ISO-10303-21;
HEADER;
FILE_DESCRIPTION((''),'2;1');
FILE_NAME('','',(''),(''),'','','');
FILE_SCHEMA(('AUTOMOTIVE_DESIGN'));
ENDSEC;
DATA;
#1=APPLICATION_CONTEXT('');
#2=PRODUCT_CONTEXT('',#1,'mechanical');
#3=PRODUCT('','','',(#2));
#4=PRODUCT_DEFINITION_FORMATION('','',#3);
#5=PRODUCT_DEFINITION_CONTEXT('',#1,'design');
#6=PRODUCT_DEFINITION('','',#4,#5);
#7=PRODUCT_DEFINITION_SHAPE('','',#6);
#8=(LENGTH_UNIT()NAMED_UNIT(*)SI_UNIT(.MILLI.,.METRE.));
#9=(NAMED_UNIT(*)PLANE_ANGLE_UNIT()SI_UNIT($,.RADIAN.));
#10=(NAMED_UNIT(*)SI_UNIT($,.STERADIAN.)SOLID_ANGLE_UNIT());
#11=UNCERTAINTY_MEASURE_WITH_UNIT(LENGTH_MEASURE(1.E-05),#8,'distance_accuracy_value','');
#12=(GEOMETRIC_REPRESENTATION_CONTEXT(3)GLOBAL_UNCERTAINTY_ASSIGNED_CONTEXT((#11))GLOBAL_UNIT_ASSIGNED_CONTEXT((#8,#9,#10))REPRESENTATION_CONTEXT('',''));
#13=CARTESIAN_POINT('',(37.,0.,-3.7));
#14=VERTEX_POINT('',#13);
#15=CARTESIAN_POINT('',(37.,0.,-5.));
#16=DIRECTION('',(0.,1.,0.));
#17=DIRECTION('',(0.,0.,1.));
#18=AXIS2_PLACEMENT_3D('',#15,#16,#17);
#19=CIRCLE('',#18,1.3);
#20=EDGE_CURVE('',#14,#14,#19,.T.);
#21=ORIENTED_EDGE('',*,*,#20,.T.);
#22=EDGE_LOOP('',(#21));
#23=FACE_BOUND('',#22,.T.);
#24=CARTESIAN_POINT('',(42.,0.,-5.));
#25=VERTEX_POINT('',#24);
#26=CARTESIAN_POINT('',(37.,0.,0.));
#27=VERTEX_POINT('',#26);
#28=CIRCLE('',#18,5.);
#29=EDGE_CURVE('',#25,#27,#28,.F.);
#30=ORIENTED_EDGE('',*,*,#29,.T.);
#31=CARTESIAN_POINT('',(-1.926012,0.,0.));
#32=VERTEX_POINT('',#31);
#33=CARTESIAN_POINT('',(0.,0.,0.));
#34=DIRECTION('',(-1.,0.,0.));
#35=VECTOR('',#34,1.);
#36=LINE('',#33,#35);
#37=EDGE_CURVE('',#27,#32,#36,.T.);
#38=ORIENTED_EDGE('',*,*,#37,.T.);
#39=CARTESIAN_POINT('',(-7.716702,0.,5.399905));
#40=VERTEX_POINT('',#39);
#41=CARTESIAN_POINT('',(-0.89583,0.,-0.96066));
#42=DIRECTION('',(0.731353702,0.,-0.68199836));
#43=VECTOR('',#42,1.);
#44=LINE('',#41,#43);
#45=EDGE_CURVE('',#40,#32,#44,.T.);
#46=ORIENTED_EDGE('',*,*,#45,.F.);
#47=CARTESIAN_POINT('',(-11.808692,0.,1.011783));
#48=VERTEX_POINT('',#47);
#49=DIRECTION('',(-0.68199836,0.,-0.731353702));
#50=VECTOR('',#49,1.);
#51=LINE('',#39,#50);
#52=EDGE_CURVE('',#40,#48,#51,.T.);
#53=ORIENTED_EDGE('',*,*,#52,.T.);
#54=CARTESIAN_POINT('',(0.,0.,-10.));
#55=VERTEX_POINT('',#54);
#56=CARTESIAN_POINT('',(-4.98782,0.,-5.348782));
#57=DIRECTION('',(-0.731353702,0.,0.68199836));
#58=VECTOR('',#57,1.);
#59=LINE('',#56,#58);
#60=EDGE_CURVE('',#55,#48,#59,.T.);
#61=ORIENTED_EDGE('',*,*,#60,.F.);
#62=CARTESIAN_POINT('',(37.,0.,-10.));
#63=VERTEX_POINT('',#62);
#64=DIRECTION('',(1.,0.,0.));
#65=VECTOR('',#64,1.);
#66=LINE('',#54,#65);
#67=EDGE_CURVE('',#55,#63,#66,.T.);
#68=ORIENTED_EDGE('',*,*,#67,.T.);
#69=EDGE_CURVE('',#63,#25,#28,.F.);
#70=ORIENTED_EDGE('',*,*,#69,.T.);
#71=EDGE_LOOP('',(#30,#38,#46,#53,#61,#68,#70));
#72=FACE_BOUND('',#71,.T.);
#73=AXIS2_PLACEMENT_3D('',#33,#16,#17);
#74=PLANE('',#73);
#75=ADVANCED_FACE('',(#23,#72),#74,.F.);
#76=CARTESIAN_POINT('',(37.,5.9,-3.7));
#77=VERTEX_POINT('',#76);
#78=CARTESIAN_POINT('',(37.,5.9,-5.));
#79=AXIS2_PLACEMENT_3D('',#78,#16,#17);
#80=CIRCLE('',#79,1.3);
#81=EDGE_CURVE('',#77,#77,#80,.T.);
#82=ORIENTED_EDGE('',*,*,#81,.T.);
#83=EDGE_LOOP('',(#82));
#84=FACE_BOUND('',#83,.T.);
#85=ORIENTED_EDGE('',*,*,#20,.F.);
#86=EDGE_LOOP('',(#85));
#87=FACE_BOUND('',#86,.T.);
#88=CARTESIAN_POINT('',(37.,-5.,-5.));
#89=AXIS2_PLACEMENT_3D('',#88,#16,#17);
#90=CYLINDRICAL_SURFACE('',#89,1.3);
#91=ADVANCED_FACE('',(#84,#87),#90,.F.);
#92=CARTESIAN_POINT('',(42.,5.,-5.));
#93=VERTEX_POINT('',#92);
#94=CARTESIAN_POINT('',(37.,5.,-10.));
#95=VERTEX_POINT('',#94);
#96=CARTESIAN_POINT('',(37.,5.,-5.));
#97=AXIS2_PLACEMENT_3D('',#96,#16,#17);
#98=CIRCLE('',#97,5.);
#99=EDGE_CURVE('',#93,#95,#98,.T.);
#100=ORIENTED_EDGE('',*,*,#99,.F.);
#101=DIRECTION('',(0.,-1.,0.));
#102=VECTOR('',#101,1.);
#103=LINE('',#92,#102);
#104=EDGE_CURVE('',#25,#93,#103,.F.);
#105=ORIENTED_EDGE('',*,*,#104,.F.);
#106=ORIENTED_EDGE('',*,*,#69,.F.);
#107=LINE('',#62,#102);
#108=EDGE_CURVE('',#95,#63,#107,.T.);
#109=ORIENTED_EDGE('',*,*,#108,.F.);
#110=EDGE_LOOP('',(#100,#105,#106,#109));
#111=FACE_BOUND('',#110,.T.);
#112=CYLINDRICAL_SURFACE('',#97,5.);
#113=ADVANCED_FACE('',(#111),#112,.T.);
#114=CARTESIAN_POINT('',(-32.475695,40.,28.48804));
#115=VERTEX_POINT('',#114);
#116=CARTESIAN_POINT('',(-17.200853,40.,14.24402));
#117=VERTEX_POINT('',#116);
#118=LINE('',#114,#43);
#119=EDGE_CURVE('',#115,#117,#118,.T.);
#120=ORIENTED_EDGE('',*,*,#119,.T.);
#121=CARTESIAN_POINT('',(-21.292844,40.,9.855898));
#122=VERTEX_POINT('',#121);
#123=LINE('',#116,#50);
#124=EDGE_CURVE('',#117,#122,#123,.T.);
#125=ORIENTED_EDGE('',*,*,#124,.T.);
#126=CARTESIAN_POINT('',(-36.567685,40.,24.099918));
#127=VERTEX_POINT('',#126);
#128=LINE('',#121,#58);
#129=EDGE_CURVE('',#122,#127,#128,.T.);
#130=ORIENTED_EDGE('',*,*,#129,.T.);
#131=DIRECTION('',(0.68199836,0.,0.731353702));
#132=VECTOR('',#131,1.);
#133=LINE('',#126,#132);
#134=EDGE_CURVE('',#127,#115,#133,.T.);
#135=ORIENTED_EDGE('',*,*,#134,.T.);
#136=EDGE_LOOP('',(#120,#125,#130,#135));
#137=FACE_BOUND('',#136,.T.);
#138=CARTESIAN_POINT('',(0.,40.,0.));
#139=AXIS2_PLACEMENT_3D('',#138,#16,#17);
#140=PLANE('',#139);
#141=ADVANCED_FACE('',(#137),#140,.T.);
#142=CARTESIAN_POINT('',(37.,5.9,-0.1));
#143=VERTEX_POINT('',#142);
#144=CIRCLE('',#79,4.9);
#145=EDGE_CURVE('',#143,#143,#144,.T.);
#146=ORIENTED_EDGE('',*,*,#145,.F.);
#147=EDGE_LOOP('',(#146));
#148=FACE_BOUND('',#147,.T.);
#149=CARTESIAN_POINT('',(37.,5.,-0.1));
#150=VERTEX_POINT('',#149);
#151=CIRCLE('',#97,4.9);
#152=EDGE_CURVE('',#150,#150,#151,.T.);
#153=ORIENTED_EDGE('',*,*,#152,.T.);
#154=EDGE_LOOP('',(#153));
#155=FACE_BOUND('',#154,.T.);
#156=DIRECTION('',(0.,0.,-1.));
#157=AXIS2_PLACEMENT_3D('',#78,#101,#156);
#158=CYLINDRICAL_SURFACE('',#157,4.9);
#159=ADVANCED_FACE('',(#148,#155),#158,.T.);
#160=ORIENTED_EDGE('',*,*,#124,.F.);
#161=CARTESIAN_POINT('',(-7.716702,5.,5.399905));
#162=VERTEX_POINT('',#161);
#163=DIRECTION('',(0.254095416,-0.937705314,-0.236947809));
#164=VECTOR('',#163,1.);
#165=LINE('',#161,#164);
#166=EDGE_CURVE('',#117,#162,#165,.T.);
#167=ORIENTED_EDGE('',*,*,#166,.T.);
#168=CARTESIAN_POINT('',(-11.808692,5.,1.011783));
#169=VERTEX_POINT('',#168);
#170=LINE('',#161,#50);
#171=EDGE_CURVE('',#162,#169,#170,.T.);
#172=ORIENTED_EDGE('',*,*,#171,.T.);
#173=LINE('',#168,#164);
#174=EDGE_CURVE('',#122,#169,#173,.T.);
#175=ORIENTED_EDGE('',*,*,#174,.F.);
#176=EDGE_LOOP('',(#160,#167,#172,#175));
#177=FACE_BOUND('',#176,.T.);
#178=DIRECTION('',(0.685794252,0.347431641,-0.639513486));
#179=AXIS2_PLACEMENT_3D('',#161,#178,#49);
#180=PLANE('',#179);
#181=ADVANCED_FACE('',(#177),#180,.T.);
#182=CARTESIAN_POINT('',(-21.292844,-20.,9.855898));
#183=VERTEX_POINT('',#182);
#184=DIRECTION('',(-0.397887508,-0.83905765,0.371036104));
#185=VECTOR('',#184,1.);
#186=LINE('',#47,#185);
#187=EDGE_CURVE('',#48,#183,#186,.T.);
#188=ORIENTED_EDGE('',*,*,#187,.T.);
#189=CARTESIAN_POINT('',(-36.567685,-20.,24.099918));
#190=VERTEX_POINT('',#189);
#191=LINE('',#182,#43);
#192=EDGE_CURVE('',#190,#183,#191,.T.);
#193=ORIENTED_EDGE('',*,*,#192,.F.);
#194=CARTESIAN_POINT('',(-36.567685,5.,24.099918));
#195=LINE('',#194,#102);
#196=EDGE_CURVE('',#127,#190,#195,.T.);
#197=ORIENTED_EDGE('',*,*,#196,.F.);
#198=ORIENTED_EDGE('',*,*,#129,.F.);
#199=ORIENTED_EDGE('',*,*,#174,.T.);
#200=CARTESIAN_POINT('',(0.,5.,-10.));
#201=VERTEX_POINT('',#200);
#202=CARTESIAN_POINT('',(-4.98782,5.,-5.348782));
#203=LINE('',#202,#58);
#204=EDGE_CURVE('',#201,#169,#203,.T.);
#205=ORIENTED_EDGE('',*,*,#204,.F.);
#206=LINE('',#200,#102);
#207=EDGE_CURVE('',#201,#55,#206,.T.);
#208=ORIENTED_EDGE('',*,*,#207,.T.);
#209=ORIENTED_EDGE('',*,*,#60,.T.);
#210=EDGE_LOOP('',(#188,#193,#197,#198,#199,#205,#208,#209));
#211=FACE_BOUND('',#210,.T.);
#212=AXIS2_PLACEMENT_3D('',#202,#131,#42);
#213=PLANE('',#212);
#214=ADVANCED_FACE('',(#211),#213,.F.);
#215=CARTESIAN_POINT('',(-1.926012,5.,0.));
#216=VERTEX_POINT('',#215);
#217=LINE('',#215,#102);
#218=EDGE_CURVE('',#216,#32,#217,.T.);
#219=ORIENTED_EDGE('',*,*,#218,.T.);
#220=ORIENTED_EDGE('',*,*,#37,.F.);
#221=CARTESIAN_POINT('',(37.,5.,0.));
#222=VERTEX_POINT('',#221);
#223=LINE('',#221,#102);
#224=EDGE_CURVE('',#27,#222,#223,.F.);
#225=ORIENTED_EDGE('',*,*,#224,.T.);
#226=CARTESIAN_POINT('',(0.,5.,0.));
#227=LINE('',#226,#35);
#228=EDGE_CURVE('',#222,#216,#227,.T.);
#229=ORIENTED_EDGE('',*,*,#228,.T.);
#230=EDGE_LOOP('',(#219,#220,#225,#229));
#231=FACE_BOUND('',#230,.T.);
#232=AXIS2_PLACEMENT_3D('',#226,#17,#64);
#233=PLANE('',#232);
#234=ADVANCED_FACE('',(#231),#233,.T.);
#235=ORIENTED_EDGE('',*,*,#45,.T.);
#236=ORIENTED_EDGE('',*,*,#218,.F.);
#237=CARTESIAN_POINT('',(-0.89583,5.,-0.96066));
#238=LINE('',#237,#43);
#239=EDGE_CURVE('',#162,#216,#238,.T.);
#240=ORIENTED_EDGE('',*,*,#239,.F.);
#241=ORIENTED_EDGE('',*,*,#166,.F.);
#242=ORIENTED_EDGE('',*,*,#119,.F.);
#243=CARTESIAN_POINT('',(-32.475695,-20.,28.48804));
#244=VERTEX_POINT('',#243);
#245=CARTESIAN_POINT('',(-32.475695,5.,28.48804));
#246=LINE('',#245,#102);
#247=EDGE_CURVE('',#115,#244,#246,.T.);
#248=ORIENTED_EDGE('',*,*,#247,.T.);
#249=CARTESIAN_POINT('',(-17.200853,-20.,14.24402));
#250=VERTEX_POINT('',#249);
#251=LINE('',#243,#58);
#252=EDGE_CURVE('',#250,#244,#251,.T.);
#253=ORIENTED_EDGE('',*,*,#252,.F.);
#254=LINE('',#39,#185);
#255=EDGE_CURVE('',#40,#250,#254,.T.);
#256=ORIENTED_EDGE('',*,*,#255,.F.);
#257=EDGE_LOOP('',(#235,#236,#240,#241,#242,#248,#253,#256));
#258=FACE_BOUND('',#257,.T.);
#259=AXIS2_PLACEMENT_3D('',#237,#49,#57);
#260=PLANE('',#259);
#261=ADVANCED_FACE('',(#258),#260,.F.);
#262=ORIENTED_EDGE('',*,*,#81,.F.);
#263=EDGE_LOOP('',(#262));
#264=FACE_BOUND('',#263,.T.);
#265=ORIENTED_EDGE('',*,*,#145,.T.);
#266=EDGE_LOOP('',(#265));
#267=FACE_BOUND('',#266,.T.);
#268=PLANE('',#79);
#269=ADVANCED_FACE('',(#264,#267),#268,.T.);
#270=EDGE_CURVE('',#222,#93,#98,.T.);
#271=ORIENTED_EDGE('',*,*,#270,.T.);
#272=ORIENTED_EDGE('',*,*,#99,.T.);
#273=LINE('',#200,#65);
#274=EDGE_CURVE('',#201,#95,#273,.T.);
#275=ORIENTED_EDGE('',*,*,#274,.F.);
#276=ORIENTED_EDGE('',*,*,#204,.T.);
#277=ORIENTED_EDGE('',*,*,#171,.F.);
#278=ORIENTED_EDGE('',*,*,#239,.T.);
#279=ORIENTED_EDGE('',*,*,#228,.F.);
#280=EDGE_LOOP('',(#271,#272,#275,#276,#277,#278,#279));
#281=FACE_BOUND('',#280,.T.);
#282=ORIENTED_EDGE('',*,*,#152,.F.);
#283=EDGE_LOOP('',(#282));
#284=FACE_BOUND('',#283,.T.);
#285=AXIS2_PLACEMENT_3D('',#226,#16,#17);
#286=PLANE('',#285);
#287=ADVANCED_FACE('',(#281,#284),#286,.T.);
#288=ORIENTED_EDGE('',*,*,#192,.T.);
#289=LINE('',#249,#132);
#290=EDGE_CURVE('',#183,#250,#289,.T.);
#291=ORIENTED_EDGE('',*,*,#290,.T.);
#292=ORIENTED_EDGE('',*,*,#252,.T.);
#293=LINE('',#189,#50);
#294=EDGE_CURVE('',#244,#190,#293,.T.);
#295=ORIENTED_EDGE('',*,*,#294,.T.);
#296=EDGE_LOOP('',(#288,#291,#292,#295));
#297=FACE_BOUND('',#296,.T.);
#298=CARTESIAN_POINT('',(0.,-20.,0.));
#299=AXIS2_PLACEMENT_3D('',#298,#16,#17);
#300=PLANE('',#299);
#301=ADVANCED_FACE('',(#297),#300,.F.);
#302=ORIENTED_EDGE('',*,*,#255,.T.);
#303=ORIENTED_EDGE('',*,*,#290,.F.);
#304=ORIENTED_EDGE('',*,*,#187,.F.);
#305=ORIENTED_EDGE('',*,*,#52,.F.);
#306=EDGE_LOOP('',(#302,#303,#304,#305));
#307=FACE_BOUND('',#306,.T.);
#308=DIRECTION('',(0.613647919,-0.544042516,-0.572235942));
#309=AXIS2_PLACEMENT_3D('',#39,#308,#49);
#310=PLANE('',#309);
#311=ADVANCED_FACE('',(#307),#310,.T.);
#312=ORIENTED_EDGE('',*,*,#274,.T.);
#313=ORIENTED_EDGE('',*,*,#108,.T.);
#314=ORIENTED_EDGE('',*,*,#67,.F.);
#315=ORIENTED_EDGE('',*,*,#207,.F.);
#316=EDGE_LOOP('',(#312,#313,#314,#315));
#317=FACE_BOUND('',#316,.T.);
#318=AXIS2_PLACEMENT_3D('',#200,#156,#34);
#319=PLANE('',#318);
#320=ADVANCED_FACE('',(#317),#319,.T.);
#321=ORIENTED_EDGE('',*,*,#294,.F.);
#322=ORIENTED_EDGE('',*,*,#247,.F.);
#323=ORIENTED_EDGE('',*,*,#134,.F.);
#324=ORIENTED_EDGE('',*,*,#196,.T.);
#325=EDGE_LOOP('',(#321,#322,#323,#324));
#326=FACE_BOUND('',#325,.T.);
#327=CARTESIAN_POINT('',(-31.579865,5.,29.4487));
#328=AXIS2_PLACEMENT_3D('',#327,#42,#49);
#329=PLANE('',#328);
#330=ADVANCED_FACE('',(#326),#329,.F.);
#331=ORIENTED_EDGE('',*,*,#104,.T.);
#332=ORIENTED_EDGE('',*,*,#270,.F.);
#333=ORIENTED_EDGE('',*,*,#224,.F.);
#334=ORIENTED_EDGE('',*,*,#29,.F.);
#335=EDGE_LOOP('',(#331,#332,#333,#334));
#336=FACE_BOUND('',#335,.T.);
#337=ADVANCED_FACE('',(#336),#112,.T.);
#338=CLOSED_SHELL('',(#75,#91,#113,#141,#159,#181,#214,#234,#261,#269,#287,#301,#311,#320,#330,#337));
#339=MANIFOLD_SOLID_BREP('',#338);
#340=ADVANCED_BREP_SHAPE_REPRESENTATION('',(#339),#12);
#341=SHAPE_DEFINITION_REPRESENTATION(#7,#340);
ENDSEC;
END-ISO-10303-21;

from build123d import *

# Parameters (mm, degrees)
BOSS_EXTRUDE1_DEPTH = 5
FILLET1_R           = 5
SKETCH2_R           = 1.3
CUT_EXTRUDE1_DEPTH  = 10
BOSS_EXTRUDE2_DEPTH = 35
BOSS_EXTRUDE3_DEPTH = 20
BOSS_EXTRUDE4_DEPTH = 6
BOSS_EXTRUDE5_START = 0.9
SKETCH6_R           = 4.9
SKETCH6_R_2         = 1.3
BOSS_EXTRUDE5_DEPTH = 0.9


with BuildPart() as part:
    # Sketch1 → Boss-Extrude1 (new body)
    with BuildSketch(Plane(origin=(0, 0, 0), x_dir=(1, 0, 0), z_dir=(0, 1, 0))):
        Polygon((4.09199016, 5.61187779), (0, 10), (0, 1.796035233), align=None)
        Polygon((0, 1.796035233), (0, 10), (-36.567685081, -24.099918003), (-32.475694921, -28.488040213), (-1.926011986, 0), align=None)
        Polygon((42, 10), (0, 10), (4.09199016, 5.61187779), (0, 1.796035233), (0, 0), (42, 0), align=None)
        Polygon((0, 0), (0, 1.796035233), (-1.926011986, 0), align=None)
    extrude(amount=BOSS_EXTRUDE1_DEPTH)

    # Fillet1
    fillet1_edges = [part.edges().sort_by_distance(p)[0] for p in [
        (42, 2.5, 0),
        (42, 2.5, -10),
    ]]
    fillet(fillet1_edges, radius=FILLET1_R - 0.0001)  # a hair under: the kernel refuses the full size

    # Sketch2 → Cut-Extrude1 (cut)
    with BuildSketch(Plane(origin=(0, 5, 0), x_dir=(1, 0, 0), z_dir=(0, 1, 0))):
        with Locations(Location((37, 5, 0), (0, 0, 270))):
            Circle(SKETCH2_R)
    extrude(amount=-CUT_EXTRUDE1_DEPTH, mode=Mode.SUBTRACT)

    # Sketch3 → Boss-Extrude2 (add)
    with BuildSketch(Plane(origin=(0, 5, 0), x_dir=(1, 0, 0), z_dir=(0, 1, 0))):
        Polygon((-36.567685081, -24.099918003), (-32.475694921, -28.488040213), (-17.200853453, -14.244020106), (-21.292843614, -9.855897897), align=None)
    extrude(amount=BOSS_EXTRUDE2_DEPTH)

    # Sketch4 → Boss-Extrude3 (add)
    with BuildSketch(Plane.XZ):
        Polygon((-36.567685081, 24.099918003), (-32.475694921, 28.488040213), (-17.200853453, 14.244020106), (-21.292843614, 9.855897897), align=None)
    extrude(amount=BOSS_EXTRUDE3_DEPTH)

    # Sketch5 → Boss-Extrude4 (add)
    with BuildSketch(Plane(origin=(-4.987820251, 0, -5.348782369), x_dir=(-0.7313537016191739, 0, 0.6819983600624947), z_dir=(-0.6819983600624948, 0, -0.731353701619174))):
        Polygon((22.294306197, -20), (22.294306197, 0), (9.326364945, 0), align=None)
        Polygon((9.326364945, 5), (22.294306197, 40), (22.294306197, 5), align=None)
    extrude(amount=-BOSS_EXTRUDE4_DEPTH)

    # Sketch6 → Boss-Extrude5 (add)
    with BuildSketch(Plane(origin=(0, 5, 0), x_dir=(1, 0, 0), z_dir=(0, 1, 0)).offset(BOSS_EXTRUDE5_START)):
        with Locations(Location((37, 5, 0), (0, 0, 270))):
            Circle(SKETCH6_R)
        with Locations(Location((37, 5, 0), (0, 0, 270))):
            Circle(SKETCH6_R_2, mode=Mode.SUBTRACT)
    extrude(amount=-BOSS_EXTRUDE5_DEPTH)


solid = part.part
